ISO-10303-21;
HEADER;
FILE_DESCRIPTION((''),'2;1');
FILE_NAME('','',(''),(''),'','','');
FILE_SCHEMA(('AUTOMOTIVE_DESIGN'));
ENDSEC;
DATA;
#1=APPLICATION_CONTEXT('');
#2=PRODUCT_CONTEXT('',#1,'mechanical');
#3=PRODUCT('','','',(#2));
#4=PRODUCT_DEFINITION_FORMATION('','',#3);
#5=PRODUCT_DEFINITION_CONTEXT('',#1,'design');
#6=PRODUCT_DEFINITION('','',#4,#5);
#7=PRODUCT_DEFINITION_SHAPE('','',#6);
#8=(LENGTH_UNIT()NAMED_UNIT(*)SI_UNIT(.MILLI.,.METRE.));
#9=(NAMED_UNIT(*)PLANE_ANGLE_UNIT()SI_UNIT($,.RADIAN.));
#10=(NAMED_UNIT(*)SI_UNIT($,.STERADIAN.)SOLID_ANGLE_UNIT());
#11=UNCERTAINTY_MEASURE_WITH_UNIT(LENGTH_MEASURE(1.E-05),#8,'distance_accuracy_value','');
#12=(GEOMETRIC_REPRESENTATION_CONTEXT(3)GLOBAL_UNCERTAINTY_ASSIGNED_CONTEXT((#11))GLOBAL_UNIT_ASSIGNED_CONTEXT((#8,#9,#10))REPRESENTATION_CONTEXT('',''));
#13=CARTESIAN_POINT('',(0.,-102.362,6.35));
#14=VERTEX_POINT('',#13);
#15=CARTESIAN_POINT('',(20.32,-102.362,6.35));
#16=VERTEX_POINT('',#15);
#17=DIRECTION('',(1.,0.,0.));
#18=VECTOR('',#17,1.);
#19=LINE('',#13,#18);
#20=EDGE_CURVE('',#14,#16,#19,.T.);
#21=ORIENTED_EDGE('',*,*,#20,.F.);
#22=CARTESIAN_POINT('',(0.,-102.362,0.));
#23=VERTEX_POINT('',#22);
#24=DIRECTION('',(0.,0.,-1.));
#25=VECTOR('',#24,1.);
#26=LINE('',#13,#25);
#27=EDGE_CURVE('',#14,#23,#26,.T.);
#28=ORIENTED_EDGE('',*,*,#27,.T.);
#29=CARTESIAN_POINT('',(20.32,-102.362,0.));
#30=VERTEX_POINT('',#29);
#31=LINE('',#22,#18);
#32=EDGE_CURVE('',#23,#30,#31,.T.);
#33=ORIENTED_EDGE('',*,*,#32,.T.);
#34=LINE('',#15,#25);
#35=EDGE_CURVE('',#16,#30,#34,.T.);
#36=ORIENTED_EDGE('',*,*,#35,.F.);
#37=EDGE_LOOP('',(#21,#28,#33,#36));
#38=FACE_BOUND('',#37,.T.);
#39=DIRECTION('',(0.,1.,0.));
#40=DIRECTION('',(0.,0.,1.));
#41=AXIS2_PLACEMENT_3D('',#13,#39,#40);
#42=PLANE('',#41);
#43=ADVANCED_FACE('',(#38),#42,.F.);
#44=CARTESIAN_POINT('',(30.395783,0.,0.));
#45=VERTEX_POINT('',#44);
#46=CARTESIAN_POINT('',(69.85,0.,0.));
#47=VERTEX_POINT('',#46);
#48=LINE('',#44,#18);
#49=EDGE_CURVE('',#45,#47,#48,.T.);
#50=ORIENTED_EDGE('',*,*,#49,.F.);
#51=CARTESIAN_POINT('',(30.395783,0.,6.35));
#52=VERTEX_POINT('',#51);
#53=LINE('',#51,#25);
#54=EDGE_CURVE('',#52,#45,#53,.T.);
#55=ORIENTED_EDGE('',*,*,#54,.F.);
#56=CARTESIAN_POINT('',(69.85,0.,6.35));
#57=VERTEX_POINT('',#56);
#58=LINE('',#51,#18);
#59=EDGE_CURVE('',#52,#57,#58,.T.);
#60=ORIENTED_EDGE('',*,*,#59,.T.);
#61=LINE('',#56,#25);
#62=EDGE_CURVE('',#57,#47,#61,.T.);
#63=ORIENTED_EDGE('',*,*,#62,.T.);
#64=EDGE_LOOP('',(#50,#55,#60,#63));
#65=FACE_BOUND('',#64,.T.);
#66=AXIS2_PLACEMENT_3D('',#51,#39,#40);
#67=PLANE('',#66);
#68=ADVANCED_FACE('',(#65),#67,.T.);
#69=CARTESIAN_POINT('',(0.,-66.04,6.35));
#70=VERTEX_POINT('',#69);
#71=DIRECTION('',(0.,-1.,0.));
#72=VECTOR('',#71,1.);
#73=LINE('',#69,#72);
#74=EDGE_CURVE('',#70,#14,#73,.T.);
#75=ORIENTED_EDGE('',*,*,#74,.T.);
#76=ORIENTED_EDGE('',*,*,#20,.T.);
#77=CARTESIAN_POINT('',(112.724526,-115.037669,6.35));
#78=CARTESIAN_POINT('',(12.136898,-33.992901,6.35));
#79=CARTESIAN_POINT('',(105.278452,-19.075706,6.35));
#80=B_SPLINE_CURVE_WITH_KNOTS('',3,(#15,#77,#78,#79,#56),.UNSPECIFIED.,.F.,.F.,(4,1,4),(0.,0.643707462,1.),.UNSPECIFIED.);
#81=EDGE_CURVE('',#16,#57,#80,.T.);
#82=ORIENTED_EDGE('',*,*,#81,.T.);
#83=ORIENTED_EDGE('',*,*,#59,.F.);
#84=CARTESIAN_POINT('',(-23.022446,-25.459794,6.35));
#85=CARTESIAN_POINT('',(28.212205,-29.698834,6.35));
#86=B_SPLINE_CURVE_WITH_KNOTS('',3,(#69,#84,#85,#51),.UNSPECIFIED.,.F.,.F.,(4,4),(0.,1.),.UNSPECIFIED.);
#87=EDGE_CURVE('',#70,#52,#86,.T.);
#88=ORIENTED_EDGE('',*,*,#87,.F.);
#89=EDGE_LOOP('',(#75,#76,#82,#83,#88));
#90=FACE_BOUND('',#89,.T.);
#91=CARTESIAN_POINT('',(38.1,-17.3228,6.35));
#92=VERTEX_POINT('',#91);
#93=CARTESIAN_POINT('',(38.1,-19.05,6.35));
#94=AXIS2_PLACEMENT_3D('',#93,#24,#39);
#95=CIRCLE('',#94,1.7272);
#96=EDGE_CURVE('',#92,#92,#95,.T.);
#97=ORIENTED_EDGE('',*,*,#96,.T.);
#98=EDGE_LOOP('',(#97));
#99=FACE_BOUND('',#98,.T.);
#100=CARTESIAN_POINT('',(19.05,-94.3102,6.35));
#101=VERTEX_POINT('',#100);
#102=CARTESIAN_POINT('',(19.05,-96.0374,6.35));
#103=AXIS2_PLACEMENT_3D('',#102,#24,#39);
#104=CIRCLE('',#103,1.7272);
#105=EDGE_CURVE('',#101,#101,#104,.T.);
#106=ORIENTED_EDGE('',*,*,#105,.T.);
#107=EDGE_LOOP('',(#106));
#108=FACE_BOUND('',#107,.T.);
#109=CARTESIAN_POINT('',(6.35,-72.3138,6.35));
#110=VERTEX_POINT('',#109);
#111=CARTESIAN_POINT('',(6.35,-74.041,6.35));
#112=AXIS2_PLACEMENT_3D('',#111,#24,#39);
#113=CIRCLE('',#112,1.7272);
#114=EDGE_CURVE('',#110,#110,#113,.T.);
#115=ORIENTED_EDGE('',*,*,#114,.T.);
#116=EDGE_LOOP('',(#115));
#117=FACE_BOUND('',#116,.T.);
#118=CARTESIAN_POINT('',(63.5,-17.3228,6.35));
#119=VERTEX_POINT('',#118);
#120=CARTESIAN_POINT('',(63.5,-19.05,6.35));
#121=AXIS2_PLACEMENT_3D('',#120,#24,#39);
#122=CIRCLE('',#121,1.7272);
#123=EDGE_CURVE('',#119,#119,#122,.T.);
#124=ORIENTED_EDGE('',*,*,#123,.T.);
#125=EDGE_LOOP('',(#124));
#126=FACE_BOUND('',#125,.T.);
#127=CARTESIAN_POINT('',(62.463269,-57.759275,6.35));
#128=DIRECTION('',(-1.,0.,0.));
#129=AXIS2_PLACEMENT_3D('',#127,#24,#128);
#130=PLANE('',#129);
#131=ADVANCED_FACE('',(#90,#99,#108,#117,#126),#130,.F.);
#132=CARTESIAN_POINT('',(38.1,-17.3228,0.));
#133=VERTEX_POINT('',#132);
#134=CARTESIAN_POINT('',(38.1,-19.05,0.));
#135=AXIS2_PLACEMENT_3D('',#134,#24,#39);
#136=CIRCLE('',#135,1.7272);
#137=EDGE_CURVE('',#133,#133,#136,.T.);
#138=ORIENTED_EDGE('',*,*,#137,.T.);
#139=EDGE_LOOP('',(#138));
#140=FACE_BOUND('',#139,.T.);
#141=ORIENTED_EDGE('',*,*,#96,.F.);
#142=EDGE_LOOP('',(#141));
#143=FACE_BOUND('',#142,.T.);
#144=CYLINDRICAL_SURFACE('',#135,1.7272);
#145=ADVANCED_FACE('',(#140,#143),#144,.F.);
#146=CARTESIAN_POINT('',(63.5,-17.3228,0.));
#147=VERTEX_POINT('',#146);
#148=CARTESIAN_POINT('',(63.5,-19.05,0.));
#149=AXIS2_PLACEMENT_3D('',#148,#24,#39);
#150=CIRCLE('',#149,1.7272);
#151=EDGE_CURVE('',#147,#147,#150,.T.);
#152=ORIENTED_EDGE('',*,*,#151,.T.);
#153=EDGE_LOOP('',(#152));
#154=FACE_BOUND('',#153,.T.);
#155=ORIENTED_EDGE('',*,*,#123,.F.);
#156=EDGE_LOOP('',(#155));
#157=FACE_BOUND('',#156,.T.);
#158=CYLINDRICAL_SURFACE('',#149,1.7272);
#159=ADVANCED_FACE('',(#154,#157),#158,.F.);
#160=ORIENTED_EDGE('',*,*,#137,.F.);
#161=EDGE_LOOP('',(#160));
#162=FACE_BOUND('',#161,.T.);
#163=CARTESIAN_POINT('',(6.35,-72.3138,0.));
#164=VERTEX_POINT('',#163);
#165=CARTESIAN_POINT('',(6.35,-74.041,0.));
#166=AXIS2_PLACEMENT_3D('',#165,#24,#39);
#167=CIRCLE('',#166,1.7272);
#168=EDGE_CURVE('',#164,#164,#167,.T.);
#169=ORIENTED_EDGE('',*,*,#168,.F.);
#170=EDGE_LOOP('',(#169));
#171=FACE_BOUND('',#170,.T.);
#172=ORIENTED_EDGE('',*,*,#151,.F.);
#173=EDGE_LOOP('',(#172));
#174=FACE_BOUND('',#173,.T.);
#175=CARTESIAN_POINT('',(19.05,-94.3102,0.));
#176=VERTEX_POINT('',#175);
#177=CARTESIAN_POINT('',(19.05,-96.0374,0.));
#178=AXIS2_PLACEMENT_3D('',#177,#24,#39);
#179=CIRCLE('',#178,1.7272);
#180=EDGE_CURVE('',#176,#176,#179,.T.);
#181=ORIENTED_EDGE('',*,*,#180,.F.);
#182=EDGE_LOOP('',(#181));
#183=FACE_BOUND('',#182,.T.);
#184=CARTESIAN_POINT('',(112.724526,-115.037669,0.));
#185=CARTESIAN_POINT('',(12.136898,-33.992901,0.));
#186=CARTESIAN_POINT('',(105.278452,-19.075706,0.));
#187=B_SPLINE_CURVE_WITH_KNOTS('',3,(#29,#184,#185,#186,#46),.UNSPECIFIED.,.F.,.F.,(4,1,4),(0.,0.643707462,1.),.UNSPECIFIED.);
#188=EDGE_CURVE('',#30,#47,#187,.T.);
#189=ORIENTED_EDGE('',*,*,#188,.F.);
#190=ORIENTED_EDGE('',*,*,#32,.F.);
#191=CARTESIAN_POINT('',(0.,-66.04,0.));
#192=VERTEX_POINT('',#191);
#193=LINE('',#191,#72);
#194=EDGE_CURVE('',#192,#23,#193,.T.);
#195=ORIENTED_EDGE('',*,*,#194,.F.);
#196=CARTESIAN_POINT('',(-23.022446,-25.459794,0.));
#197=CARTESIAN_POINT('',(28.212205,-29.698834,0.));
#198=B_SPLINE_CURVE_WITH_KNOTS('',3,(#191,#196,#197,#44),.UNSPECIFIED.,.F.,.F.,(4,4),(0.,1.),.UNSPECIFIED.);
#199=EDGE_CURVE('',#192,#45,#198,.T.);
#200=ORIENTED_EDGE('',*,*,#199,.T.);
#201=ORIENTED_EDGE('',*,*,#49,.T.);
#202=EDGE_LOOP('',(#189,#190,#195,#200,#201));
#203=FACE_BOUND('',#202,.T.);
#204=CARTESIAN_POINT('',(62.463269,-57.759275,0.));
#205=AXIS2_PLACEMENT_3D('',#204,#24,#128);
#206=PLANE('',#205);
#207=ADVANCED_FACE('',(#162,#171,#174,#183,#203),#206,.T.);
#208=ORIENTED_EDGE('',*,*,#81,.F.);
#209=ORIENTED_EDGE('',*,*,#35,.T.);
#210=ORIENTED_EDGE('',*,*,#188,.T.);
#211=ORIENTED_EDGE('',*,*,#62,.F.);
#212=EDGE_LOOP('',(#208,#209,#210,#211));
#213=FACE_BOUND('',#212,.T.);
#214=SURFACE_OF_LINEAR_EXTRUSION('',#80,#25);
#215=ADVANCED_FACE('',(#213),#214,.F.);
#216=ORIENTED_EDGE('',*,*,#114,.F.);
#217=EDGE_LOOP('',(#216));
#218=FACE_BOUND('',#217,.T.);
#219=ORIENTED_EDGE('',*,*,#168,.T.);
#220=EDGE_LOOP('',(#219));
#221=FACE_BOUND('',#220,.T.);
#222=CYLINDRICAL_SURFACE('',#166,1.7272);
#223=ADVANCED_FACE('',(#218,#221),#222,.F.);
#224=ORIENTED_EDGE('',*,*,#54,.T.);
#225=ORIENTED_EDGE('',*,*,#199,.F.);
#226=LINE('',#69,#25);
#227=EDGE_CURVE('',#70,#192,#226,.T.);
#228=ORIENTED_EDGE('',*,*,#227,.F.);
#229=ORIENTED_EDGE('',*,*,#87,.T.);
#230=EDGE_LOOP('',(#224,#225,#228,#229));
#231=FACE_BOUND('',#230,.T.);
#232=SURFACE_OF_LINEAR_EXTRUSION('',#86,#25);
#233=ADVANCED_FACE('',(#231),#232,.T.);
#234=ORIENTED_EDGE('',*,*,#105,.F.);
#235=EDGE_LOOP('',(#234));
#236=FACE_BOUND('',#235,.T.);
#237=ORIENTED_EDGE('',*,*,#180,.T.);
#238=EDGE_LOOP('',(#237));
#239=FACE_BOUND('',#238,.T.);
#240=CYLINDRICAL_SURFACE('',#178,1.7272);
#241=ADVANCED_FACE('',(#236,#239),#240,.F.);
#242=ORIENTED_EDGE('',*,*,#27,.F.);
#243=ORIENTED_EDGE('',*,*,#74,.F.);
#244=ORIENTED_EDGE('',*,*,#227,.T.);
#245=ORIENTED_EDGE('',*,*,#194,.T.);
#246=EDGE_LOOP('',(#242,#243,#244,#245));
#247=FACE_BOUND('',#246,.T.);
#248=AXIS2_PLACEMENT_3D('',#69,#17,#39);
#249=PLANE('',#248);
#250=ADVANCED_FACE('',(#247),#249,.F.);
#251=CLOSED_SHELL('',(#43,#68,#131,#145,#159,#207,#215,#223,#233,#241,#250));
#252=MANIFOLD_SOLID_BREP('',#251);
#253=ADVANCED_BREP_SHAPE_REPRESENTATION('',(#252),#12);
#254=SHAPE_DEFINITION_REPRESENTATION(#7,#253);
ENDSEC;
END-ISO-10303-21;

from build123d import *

# Parameters (mm, degrees)
BOSS_EXTRUDE1_DEPTH       = 6.35
TAP_DRILL_FOR_8_32_TAP1_D = 3.4544


# Read off the part's stored shape, not the designer's step: Boss-Extrude1
with BuildPart() as part:
    # Boss-Extrude1 outline → Boss-Extrude1 (new body)
    with BuildSketch(Plane.XY):
        with BuildLine():
            Line((0, -66.04), (0, -102.362))
            Line((0, -102.362), (20.32, -102.362))
            add(Edge.make_bspline(
                [(20.32, -102.362), (112.724526082, -115.037668854), (12.136897546, -33.992901458), (105.278452179, -19.075705978), (69.85, 0)],
                knots=[0, 0, 0, 0, 0.643707462, 1, 1, 1, 1], degree=3))
            Line((69.85, 0), (30.395783043, 0))
            add(Edge.make_bspline(
                [(0, -66.04), (-23.02244586, -25.459793903), (28.212204822, -29.698834111), (30.395783043, 0)],
                knots=[0, 0, 0, 0, 1, 1, 1, 1], degree=3))
        make_face()
    extrude(amount=BOSS_EXTRUDE1_DEPTH)

    # Tap Drill for #8-32 Tap1 (through all)
    with Locations(Plane(origin=(0, 0, 0), x_dir=(-1, 0, 0), z_dir=(0, 0, -1))):
        with Locations((-63.5, -19.05), (-38.1, -19.05), (-6.35, -74.041), (-19.05, -96.0374)):
            Hole(TAP_DRILL_FOR_8_32_TAP1_D / 2)


solid = part.part
